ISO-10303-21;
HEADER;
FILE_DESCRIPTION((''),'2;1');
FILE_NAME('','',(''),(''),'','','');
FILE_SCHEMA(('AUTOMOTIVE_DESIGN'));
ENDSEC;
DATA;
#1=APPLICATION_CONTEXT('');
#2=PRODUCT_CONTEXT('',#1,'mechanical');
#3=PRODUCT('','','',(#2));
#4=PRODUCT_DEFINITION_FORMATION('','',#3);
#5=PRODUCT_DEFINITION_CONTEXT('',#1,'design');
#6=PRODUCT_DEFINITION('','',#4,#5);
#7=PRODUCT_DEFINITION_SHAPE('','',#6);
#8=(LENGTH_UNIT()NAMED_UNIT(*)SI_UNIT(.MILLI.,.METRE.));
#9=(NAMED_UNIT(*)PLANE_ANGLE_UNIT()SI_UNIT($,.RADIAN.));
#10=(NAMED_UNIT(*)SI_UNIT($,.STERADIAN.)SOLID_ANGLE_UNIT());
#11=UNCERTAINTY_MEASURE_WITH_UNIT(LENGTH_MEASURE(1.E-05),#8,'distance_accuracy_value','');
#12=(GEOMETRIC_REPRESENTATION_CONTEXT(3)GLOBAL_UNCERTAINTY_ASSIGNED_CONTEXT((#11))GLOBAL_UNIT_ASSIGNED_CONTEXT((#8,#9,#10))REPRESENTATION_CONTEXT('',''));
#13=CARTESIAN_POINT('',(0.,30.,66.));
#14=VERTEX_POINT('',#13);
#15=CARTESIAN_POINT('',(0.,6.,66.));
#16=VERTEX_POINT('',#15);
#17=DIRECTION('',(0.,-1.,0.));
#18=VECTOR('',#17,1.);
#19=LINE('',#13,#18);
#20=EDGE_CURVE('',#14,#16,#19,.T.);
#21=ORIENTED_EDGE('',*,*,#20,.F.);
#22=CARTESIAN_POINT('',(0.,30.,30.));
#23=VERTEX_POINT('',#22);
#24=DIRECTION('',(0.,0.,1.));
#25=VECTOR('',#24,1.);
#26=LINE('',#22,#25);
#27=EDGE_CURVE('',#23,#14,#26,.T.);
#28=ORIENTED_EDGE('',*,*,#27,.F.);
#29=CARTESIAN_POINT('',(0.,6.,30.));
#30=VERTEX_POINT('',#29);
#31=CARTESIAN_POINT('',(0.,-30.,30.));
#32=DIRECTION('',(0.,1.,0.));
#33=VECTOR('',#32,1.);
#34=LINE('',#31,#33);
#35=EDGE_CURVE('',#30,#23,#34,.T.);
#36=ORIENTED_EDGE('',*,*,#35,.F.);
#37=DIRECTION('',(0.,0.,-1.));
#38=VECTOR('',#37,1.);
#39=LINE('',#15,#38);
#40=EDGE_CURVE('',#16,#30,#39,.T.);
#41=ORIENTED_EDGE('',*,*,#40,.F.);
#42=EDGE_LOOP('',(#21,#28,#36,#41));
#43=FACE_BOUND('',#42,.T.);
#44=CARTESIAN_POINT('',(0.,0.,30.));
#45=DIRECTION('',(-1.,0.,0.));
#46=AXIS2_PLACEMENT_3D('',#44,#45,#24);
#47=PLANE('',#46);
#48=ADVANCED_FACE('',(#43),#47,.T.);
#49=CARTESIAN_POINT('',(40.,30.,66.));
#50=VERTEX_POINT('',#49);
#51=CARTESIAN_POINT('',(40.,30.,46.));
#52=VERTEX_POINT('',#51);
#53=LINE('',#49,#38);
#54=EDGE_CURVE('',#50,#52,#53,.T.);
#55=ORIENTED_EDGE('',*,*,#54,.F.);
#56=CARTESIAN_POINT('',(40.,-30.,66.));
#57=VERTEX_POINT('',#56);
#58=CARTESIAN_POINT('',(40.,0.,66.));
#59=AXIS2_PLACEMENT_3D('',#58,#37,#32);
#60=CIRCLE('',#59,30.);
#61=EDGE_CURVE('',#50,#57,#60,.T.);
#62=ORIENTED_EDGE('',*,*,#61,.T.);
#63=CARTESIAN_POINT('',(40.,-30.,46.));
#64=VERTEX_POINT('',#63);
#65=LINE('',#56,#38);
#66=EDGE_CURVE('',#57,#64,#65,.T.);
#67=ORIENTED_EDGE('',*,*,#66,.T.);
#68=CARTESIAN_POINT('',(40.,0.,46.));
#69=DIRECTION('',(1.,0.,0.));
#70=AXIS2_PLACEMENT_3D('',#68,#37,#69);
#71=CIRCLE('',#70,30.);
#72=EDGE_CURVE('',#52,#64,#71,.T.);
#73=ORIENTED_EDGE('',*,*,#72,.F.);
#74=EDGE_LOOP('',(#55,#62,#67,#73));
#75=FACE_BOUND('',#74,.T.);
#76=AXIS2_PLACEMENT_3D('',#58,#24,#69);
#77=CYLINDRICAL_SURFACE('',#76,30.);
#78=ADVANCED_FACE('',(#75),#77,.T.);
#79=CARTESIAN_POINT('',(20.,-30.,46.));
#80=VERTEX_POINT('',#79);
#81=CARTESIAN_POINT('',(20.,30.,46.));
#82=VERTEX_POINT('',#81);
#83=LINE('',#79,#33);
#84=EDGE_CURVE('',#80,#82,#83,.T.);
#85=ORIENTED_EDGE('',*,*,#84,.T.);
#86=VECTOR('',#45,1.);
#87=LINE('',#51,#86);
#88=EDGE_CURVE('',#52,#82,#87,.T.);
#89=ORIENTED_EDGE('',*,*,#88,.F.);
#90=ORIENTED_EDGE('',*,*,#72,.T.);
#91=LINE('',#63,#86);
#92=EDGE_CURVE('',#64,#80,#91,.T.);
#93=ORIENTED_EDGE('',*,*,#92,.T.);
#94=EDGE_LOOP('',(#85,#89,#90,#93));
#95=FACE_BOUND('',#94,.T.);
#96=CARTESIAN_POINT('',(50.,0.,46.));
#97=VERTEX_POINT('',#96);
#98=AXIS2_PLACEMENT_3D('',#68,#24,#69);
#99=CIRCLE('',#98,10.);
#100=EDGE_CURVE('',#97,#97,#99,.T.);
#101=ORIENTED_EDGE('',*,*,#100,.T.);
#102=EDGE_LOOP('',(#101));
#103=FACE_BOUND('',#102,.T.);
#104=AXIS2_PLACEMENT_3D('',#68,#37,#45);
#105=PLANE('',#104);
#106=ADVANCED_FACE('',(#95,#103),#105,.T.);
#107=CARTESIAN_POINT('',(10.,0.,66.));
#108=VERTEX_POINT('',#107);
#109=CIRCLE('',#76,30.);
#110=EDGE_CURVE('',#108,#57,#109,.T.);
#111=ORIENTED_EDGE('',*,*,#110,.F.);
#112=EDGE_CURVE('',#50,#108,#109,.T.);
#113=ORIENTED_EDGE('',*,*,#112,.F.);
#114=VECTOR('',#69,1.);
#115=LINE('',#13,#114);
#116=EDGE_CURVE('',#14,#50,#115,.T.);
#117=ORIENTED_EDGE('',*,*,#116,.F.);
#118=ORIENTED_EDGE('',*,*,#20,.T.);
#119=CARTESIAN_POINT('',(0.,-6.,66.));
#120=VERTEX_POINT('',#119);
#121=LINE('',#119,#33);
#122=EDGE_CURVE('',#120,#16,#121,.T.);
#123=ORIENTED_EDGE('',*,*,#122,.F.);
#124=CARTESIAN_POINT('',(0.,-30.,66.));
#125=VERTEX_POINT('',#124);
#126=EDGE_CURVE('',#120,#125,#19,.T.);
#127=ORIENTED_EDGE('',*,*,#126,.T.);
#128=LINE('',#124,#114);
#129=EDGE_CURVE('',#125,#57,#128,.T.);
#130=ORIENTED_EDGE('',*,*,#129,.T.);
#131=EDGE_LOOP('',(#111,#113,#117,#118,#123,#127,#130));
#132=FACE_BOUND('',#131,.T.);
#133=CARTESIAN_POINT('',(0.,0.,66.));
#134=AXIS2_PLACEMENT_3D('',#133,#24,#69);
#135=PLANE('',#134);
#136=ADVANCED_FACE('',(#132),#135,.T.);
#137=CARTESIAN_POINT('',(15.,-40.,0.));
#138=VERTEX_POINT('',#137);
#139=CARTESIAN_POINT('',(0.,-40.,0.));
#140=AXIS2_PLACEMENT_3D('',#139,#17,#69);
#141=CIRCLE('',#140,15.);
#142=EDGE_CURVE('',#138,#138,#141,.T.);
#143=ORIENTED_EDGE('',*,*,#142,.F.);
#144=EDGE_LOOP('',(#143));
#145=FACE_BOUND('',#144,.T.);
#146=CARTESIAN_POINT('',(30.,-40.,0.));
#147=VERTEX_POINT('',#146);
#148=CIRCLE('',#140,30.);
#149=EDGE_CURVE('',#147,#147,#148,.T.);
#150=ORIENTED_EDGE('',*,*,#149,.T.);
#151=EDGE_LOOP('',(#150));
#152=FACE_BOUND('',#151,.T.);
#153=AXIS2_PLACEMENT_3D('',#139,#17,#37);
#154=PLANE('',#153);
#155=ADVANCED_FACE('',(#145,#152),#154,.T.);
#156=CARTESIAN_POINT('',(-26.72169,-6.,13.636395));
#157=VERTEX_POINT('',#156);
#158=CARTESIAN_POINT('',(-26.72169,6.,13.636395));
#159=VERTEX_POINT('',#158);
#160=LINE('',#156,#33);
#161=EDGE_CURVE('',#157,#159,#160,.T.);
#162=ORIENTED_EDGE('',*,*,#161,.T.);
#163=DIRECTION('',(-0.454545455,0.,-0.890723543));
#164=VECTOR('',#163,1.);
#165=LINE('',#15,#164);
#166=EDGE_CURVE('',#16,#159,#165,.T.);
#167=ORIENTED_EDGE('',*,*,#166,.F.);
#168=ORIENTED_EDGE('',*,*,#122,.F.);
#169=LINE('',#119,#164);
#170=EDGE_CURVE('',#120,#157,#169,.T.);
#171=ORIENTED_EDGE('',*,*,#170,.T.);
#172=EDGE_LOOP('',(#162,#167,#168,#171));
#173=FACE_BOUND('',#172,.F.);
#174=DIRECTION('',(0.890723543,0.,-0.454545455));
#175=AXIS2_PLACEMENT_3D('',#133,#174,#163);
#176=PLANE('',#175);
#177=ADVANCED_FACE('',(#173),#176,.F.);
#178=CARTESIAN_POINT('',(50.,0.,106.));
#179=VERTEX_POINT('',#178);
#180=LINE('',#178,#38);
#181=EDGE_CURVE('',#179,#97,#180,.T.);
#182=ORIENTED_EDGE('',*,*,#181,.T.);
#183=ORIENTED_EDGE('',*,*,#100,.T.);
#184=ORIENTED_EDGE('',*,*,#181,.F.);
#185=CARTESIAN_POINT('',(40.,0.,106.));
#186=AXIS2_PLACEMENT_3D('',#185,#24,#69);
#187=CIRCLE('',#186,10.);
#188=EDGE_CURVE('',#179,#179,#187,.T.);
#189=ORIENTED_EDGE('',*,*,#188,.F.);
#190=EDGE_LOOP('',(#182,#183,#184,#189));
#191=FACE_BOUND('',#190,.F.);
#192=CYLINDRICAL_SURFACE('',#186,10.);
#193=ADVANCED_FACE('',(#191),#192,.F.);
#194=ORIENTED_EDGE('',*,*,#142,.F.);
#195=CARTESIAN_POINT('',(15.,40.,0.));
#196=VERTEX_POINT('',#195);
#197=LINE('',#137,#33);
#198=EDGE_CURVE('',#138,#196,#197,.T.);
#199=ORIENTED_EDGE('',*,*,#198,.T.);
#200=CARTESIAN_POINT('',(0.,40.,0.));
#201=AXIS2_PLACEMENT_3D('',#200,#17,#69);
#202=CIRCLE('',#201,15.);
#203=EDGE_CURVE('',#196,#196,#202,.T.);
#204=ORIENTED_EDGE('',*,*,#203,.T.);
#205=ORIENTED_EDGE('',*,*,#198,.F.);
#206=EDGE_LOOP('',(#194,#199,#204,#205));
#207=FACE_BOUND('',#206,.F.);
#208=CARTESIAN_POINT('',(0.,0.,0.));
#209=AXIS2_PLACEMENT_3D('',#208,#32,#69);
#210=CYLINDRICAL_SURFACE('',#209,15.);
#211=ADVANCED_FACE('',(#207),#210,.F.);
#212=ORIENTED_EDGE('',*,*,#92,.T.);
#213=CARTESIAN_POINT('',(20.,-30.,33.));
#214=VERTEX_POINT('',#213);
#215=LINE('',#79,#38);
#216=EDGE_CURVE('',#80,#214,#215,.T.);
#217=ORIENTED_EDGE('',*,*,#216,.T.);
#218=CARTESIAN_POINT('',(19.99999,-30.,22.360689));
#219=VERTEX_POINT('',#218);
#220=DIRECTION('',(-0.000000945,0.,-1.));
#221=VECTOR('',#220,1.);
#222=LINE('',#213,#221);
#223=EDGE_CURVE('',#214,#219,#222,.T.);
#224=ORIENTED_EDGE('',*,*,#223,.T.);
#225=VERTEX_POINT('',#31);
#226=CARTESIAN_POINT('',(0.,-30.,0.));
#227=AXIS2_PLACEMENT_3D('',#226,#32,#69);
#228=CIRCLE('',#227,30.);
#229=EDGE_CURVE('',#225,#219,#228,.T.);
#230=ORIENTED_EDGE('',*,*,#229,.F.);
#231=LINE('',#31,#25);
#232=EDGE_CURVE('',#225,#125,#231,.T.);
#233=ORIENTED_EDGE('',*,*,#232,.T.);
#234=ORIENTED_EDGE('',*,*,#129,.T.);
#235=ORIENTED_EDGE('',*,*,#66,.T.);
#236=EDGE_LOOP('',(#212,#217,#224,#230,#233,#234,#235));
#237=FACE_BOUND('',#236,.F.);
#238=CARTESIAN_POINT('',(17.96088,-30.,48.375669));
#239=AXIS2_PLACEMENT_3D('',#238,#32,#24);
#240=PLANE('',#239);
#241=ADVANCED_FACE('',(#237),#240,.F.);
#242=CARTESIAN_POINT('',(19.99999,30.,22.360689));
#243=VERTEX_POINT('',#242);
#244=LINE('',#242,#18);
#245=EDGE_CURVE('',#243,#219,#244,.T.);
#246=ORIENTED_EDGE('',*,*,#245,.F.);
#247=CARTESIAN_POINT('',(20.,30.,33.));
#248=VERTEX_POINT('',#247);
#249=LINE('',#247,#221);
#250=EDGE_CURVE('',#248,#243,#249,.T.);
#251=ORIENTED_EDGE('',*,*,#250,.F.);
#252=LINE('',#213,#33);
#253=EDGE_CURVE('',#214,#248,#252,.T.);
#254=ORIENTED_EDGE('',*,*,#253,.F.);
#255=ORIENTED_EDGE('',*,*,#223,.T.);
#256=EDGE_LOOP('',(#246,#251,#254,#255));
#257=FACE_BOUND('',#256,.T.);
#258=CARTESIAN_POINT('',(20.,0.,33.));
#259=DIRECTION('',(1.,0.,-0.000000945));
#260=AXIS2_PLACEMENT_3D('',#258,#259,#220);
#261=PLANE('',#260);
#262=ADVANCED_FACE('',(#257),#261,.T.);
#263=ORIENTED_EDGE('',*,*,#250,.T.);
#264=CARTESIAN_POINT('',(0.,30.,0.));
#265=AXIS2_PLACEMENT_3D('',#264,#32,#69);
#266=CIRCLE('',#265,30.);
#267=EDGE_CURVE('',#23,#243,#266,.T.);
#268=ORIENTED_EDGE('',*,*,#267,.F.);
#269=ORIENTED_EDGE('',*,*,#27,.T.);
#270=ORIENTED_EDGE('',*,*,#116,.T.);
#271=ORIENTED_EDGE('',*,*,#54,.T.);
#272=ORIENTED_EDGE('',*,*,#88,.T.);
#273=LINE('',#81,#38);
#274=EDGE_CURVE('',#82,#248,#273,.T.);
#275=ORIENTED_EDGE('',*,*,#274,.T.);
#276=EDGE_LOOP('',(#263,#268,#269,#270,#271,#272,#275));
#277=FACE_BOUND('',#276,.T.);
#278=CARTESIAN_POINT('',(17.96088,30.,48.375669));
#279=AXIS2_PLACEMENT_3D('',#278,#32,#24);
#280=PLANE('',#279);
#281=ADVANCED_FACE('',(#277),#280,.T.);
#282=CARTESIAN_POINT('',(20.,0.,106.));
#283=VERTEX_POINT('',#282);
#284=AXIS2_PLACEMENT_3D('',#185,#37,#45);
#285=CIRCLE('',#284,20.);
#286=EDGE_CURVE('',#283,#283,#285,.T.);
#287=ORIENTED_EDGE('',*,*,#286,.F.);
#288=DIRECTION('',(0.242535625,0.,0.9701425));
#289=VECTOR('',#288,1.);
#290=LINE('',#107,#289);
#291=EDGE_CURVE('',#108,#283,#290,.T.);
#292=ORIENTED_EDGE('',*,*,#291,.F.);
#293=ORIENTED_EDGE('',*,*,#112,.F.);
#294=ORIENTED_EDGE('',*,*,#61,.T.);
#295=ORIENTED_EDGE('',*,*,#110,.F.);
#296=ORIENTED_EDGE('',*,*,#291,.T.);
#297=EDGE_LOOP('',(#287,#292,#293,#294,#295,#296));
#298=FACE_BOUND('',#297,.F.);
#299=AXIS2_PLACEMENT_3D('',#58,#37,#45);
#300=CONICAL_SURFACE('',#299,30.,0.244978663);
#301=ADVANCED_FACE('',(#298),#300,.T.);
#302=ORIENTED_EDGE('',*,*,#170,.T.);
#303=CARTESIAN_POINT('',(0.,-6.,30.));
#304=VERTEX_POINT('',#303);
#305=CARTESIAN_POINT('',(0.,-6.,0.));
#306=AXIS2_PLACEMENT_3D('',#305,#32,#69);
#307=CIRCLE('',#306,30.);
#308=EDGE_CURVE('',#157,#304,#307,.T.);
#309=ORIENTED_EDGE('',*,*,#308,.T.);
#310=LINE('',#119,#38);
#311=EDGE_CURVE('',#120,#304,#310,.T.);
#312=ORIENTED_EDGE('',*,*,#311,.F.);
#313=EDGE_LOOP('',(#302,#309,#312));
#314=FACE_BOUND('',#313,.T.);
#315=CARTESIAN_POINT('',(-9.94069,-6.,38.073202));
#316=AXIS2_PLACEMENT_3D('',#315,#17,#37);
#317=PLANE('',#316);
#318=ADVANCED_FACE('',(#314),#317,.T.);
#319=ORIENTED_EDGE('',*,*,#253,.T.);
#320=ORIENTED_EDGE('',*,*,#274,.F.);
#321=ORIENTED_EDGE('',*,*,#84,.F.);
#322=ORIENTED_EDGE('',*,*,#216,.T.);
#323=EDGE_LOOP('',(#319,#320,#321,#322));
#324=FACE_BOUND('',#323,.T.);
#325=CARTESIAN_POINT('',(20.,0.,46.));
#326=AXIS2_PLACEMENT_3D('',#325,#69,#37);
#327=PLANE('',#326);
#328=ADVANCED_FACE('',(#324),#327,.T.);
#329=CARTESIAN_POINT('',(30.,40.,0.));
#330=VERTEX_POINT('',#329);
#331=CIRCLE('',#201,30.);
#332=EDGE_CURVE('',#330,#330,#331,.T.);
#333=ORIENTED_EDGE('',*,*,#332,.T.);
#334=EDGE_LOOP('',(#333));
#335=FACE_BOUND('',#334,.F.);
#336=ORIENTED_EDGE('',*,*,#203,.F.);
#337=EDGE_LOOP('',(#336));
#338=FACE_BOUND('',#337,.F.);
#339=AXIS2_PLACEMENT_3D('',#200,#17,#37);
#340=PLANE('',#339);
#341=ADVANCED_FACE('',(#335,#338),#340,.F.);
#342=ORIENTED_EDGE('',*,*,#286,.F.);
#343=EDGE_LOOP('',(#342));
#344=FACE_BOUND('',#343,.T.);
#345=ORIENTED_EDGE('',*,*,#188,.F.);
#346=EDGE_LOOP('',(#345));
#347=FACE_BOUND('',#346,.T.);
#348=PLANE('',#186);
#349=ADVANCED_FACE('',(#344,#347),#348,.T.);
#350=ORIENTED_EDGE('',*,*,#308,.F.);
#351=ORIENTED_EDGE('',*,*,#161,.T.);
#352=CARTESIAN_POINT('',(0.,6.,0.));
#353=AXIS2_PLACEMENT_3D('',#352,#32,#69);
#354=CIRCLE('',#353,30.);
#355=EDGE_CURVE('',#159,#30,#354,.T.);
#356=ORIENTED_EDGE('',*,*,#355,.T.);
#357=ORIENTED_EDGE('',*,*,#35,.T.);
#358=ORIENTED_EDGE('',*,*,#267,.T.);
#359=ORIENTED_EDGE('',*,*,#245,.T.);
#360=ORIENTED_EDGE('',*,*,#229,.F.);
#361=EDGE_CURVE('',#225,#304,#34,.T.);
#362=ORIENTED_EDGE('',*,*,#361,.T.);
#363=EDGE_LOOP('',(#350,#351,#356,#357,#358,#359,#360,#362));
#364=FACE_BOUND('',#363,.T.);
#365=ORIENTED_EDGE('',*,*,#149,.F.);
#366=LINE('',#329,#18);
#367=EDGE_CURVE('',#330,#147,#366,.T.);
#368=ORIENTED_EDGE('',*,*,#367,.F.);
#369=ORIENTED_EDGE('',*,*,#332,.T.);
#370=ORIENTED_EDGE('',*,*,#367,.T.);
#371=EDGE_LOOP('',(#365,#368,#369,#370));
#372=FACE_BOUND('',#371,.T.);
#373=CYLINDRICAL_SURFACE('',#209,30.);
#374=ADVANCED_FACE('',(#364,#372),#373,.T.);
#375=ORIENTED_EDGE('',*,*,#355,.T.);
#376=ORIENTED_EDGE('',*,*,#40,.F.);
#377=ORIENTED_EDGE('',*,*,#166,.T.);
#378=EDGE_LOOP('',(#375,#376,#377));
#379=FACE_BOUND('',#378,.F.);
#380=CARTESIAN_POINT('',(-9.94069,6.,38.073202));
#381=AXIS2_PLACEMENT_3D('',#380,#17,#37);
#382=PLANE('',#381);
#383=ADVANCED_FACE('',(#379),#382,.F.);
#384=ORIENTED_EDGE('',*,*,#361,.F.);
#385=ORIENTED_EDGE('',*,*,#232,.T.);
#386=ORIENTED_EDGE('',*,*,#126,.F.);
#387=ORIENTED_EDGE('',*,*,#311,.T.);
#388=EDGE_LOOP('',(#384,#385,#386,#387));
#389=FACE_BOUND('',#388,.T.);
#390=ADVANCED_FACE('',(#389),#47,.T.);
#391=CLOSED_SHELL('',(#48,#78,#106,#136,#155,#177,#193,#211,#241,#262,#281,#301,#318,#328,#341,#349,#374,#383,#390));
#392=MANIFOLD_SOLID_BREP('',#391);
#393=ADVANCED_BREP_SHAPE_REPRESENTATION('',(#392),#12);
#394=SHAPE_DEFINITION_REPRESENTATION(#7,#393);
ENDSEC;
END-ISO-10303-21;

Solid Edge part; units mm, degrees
sketch "Sketch1" plane through (0, 0, 0) normal (0, -1, 0) x (1, 0, 0)
  circle A0 centre (0, 0) radius 30
  circle A1 centre (0, 0) radius 15
extrude "Protrusion1" add sketch "Sketch1" along normal mid plane 80
sketch "Sketch2" plane through (0, 0, 0) normal (0, -1, 0) x (1, 0, 0)
  line L0 (0, 66) -> (40, 66)
  line L1 (40, 66) -> (40, 46)
  line L2 (40, 46) -> (20, 46)
  line L3 (20, 46) -> (20, 33)
  line L4 (20, 33) -> (20, 22.3607)
  line L5 (0, 30) -> (0, 66)
  arc A0 (0, 30) -> (20, 22.3607) centre (0, 0) cw
extrude "ExtrudedProtrusion_2" add sketch "Sketch2" along normal mid plane 60
sketch "Sketch3" plane through (20, 0, 66) normal (0, 0, 1) x (1, 0, 0)
  line L0 (20, 30) -> (20, -30)
  arc A0 (20, 30) -> (20, -30) centre (20, 0) cw
extrude "Protrusion2" add sketch "Sketch3" against normal up to vertex (20 mm away)
sketch "Sketch4" plane through (20, 0, 66) normal (0, 0, 1) x (1, 0, 0)
  circle A0 centre (20, 0) radius 30
extrude "ExtrudedProtrusion_4" add sketch "Sketch4" along normal blind 40
sketch "Sketch5" plane through (40, 0, 106) normal (0, 0, 1) x (1, 0, 0)
  circle A0 centre (0, 0) radius 10
extrude "Cutout1" cut sketch "Sketch5" against normal up to vertex (60 mm away)
sketch "Sketch6" plane through (0, 0, 0) normal (0, -1, 0) x (1, 0, 0)
  line L0 (10, 66) -> (20, 106)
  line L1 (20, 106) -> (10, 106)
  line L2 (10, 106) -> (10, 66)
revolve "RevolvedCutout1" cut sketch "Sketch6" angle 360 about axis through (40, 0, 106) along (0, 0, -1)
sketch "Sketch7" plane through (0, 0, 0) normal (0, -1, 0) x (1, 0, 0)
  arc A0 (-26.7217, 13.6364) -> (0, 30) centre (0, 0) cw
  line L0 (0, 66) -> (-26.7217, 13.6364)
  line L1 (0, 66) -> (0, 30)
extrude "ExtrudedProtrusion_5" add sketch "Sketch7" along normal mid plane 12
